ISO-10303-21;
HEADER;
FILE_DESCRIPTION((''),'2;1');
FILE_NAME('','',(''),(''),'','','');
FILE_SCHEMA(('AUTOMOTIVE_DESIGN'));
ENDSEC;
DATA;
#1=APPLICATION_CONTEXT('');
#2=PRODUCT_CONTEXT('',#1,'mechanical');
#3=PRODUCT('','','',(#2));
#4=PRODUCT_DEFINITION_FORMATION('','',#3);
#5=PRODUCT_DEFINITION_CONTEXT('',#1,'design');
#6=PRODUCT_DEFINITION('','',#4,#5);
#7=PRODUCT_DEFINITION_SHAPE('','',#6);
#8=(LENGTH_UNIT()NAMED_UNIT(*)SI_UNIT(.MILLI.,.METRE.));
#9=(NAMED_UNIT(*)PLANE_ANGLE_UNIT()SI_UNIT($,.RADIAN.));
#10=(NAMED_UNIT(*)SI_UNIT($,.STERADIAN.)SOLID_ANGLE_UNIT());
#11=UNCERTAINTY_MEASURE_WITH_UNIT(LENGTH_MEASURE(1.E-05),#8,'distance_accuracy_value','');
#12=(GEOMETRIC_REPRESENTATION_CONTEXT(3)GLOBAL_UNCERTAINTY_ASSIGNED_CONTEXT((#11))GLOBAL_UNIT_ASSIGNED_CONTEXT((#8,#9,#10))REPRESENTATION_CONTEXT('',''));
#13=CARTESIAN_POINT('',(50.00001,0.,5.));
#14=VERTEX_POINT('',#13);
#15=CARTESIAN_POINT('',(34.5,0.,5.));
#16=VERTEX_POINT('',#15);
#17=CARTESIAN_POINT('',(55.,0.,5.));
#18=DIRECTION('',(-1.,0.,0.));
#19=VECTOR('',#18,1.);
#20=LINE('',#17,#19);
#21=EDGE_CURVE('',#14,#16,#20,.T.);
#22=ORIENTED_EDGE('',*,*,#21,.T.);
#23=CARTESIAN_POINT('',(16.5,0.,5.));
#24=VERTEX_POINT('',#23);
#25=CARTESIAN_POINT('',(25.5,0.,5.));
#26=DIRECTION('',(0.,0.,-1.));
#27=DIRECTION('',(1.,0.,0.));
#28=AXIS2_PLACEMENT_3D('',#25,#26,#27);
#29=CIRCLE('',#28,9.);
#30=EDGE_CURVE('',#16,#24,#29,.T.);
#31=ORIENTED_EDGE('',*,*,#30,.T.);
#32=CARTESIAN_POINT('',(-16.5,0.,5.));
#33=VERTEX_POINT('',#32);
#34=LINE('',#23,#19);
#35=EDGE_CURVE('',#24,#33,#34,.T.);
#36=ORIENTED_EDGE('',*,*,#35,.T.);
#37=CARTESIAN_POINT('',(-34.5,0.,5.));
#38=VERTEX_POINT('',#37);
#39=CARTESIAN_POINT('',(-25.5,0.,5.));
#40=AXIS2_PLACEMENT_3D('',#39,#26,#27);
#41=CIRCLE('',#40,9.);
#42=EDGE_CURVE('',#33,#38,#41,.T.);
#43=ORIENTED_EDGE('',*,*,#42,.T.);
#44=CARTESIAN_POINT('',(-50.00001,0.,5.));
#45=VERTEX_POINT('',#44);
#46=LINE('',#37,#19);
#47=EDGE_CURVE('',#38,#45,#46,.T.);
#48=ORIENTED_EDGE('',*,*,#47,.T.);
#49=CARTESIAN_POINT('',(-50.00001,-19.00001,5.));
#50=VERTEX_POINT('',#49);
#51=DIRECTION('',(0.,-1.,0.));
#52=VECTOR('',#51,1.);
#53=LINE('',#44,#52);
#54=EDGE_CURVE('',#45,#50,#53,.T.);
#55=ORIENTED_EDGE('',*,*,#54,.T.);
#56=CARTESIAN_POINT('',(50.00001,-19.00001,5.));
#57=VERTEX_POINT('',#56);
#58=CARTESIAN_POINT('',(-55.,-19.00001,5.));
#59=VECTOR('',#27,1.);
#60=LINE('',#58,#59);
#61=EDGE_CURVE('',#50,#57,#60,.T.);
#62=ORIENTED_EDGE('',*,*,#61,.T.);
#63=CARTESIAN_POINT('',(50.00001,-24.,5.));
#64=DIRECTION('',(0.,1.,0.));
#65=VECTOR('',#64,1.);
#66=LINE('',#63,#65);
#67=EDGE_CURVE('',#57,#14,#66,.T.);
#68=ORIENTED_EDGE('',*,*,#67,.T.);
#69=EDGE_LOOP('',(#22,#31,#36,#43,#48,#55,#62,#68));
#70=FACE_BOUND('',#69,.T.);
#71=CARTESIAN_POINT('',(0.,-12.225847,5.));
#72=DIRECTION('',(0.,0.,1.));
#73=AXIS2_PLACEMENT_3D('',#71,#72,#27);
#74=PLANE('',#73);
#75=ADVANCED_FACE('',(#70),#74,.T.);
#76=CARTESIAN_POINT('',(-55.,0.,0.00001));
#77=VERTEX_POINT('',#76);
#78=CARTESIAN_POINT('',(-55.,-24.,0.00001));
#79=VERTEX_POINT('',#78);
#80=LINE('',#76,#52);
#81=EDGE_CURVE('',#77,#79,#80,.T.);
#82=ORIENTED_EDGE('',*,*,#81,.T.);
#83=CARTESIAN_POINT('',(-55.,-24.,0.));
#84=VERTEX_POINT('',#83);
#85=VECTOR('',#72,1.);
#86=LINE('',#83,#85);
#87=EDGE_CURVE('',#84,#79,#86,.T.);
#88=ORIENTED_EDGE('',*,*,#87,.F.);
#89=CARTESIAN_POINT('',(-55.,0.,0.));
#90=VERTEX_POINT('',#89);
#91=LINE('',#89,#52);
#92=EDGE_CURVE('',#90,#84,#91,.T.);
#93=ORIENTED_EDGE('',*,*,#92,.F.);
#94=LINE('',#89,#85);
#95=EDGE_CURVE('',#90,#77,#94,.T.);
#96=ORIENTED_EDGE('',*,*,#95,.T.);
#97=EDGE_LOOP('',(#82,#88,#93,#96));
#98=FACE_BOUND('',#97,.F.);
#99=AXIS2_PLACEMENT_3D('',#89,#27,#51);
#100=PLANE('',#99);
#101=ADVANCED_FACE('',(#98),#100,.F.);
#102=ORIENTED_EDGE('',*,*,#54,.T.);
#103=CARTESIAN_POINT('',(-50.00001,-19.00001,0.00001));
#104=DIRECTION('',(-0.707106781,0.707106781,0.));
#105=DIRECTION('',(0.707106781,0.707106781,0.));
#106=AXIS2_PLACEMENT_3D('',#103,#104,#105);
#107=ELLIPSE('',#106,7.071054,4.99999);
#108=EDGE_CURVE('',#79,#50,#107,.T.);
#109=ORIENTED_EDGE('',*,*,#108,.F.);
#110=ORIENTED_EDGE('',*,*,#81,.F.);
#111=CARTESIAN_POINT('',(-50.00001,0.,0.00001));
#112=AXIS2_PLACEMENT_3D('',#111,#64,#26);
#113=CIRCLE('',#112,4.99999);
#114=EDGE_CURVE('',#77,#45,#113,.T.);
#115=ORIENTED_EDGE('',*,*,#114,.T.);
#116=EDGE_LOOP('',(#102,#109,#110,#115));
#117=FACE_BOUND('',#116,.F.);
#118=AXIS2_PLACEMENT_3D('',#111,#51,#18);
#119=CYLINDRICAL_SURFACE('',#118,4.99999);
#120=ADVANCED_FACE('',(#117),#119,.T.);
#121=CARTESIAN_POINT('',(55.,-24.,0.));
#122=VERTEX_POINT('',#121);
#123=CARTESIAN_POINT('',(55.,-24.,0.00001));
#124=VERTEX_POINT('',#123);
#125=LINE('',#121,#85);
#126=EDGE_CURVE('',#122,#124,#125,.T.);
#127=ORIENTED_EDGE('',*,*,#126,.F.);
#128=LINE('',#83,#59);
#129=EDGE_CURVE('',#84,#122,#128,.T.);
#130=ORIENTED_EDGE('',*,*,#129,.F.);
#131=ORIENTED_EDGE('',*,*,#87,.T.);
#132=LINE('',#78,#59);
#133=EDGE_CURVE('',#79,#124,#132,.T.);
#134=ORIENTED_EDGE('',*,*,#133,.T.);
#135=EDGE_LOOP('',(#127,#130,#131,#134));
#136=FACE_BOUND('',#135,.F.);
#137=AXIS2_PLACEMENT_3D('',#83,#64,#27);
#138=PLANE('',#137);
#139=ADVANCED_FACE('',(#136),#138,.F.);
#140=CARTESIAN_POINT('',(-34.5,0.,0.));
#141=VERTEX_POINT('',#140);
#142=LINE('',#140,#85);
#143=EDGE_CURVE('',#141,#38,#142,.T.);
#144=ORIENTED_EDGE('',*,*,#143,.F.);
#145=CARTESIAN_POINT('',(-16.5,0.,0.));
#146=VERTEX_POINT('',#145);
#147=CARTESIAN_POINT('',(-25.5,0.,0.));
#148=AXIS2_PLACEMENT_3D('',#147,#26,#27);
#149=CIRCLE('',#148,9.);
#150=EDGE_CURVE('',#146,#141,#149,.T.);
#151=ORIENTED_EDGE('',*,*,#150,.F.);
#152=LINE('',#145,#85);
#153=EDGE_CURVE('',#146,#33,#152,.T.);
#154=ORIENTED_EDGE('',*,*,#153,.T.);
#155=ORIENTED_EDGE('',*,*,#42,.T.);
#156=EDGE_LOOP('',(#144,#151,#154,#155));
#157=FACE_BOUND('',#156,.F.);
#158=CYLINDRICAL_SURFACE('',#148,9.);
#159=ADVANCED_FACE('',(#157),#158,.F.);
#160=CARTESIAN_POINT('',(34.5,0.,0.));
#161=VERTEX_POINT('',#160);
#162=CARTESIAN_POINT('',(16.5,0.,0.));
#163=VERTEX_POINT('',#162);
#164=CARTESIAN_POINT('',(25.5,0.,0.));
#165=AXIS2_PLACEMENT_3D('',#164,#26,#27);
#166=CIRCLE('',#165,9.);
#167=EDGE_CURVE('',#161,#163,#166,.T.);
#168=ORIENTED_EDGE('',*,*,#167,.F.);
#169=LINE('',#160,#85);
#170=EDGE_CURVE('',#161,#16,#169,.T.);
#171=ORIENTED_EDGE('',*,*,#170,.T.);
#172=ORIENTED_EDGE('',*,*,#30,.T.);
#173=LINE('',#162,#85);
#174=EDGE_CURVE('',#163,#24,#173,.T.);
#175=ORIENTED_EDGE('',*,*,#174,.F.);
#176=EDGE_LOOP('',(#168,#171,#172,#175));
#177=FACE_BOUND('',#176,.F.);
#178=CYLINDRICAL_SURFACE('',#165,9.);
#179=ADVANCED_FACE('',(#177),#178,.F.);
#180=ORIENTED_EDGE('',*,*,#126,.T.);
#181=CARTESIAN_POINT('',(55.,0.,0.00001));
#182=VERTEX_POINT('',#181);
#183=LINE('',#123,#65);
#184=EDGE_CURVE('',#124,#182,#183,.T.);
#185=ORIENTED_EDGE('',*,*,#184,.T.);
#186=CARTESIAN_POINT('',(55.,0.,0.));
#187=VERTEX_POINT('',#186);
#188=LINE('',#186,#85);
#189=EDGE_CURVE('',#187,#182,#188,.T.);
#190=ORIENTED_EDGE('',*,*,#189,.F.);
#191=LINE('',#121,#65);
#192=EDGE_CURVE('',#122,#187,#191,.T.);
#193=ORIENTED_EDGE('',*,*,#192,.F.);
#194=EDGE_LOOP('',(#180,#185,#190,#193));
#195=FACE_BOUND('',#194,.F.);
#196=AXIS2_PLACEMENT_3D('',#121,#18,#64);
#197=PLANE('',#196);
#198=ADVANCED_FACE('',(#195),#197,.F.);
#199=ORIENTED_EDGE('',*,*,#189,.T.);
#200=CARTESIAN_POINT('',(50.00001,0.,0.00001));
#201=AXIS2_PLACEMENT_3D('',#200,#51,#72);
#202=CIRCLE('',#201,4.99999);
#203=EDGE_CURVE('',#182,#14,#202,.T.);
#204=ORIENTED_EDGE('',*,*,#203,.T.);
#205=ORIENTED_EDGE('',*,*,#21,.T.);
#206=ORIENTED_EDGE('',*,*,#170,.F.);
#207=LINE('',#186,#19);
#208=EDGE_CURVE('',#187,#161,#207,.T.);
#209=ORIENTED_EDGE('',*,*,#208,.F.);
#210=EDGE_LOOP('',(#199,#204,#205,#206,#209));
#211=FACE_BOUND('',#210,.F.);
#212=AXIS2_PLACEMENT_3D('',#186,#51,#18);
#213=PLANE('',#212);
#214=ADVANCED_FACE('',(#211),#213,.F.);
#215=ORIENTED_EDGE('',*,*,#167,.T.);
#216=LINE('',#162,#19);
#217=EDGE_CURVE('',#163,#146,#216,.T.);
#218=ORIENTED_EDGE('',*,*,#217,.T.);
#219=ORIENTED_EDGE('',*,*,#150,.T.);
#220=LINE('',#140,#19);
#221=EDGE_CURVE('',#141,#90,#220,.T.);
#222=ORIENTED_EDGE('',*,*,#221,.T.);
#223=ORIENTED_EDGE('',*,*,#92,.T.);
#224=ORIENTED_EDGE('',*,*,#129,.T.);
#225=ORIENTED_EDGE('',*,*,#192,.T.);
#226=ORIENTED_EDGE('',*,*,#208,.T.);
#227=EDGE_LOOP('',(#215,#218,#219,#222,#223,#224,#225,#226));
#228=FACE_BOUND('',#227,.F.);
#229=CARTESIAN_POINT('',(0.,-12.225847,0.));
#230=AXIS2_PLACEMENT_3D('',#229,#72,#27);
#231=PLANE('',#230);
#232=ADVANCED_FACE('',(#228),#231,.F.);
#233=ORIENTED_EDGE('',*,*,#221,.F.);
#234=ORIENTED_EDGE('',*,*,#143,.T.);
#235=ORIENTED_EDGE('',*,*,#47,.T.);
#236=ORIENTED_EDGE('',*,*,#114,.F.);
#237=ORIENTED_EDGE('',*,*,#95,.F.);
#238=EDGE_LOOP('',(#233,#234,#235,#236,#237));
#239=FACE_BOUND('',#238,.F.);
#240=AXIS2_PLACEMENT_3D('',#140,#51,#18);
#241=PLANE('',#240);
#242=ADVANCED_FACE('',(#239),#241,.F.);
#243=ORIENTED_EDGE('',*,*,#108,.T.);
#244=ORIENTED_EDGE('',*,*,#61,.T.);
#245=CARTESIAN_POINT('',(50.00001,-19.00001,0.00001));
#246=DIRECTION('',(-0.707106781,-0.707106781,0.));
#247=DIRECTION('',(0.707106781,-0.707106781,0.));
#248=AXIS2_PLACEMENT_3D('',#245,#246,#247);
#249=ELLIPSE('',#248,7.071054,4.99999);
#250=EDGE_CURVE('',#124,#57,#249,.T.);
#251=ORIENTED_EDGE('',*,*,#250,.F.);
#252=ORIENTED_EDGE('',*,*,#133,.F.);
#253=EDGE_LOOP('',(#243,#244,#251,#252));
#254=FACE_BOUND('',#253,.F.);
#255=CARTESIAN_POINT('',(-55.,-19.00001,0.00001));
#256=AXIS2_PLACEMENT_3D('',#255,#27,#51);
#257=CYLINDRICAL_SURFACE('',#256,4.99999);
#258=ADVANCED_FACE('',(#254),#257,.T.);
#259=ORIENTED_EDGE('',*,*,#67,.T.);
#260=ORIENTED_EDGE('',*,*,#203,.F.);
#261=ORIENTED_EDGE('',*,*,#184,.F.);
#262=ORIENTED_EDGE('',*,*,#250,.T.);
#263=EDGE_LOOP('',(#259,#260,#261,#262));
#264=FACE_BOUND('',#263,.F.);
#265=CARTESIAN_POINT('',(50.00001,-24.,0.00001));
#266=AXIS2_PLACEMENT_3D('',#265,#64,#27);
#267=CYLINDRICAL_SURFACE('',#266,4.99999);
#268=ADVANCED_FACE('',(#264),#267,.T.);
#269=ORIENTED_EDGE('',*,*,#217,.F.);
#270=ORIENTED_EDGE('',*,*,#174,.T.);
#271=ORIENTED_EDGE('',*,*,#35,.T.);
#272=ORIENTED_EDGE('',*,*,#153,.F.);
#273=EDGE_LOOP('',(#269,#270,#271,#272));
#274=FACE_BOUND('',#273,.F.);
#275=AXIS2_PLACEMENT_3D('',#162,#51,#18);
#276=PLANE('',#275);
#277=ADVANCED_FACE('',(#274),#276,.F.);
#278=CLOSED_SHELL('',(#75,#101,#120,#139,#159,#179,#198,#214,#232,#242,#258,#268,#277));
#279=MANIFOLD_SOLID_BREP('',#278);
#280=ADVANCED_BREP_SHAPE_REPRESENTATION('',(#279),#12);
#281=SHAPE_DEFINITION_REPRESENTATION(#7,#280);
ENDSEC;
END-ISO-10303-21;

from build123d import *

# Parameters (mm, degrees)
F1_DEPTH = 5
F2_R     = 4.99999


# Not quite as in the source:
# - a fillet or chamfer is up to 0.001 mm smaller than in the source, because OpenCascade refuses the exact size


with BuildPart() as f1:
    # F0 (on Top) → F1 (new body)
    with BuildSketch(Plane.XY):
        with BuildLine():
            Line((16.5, 0), (0, 0))
            Line((0, 0), (-16.5, 0))
            ThreePointArc((-16.5, 0), (-25.5, -9), (-34.5, 0))
            Line((-34.5, 0), (-55, 0))
            Line((-55, 0), (-55, -24))
            Line((-55, -24), (0, -24))
            Line((0, -24), (55, -24))
            Line((55, -24), (55, 0))
            Line((55, 0), (34.5, 0))
            ThreePointArc((34.5, 0), (25.5, -9), (16.5, 0))
        make_face()
    extrude(amount=F1_DEPTH)

    # F2 (radius 5 in the source; OpenCascade refuses exactly that, so slightly less here)
    f2_edges = [f1.edges().sort_by_distance(p)[0] for p in [
        (0, -24, 5),
        (-55, -12, 5),
        (55, -12, 5),
    ]]
    fillet(f2_edges, radius=F2_R)


solid = f1.part
